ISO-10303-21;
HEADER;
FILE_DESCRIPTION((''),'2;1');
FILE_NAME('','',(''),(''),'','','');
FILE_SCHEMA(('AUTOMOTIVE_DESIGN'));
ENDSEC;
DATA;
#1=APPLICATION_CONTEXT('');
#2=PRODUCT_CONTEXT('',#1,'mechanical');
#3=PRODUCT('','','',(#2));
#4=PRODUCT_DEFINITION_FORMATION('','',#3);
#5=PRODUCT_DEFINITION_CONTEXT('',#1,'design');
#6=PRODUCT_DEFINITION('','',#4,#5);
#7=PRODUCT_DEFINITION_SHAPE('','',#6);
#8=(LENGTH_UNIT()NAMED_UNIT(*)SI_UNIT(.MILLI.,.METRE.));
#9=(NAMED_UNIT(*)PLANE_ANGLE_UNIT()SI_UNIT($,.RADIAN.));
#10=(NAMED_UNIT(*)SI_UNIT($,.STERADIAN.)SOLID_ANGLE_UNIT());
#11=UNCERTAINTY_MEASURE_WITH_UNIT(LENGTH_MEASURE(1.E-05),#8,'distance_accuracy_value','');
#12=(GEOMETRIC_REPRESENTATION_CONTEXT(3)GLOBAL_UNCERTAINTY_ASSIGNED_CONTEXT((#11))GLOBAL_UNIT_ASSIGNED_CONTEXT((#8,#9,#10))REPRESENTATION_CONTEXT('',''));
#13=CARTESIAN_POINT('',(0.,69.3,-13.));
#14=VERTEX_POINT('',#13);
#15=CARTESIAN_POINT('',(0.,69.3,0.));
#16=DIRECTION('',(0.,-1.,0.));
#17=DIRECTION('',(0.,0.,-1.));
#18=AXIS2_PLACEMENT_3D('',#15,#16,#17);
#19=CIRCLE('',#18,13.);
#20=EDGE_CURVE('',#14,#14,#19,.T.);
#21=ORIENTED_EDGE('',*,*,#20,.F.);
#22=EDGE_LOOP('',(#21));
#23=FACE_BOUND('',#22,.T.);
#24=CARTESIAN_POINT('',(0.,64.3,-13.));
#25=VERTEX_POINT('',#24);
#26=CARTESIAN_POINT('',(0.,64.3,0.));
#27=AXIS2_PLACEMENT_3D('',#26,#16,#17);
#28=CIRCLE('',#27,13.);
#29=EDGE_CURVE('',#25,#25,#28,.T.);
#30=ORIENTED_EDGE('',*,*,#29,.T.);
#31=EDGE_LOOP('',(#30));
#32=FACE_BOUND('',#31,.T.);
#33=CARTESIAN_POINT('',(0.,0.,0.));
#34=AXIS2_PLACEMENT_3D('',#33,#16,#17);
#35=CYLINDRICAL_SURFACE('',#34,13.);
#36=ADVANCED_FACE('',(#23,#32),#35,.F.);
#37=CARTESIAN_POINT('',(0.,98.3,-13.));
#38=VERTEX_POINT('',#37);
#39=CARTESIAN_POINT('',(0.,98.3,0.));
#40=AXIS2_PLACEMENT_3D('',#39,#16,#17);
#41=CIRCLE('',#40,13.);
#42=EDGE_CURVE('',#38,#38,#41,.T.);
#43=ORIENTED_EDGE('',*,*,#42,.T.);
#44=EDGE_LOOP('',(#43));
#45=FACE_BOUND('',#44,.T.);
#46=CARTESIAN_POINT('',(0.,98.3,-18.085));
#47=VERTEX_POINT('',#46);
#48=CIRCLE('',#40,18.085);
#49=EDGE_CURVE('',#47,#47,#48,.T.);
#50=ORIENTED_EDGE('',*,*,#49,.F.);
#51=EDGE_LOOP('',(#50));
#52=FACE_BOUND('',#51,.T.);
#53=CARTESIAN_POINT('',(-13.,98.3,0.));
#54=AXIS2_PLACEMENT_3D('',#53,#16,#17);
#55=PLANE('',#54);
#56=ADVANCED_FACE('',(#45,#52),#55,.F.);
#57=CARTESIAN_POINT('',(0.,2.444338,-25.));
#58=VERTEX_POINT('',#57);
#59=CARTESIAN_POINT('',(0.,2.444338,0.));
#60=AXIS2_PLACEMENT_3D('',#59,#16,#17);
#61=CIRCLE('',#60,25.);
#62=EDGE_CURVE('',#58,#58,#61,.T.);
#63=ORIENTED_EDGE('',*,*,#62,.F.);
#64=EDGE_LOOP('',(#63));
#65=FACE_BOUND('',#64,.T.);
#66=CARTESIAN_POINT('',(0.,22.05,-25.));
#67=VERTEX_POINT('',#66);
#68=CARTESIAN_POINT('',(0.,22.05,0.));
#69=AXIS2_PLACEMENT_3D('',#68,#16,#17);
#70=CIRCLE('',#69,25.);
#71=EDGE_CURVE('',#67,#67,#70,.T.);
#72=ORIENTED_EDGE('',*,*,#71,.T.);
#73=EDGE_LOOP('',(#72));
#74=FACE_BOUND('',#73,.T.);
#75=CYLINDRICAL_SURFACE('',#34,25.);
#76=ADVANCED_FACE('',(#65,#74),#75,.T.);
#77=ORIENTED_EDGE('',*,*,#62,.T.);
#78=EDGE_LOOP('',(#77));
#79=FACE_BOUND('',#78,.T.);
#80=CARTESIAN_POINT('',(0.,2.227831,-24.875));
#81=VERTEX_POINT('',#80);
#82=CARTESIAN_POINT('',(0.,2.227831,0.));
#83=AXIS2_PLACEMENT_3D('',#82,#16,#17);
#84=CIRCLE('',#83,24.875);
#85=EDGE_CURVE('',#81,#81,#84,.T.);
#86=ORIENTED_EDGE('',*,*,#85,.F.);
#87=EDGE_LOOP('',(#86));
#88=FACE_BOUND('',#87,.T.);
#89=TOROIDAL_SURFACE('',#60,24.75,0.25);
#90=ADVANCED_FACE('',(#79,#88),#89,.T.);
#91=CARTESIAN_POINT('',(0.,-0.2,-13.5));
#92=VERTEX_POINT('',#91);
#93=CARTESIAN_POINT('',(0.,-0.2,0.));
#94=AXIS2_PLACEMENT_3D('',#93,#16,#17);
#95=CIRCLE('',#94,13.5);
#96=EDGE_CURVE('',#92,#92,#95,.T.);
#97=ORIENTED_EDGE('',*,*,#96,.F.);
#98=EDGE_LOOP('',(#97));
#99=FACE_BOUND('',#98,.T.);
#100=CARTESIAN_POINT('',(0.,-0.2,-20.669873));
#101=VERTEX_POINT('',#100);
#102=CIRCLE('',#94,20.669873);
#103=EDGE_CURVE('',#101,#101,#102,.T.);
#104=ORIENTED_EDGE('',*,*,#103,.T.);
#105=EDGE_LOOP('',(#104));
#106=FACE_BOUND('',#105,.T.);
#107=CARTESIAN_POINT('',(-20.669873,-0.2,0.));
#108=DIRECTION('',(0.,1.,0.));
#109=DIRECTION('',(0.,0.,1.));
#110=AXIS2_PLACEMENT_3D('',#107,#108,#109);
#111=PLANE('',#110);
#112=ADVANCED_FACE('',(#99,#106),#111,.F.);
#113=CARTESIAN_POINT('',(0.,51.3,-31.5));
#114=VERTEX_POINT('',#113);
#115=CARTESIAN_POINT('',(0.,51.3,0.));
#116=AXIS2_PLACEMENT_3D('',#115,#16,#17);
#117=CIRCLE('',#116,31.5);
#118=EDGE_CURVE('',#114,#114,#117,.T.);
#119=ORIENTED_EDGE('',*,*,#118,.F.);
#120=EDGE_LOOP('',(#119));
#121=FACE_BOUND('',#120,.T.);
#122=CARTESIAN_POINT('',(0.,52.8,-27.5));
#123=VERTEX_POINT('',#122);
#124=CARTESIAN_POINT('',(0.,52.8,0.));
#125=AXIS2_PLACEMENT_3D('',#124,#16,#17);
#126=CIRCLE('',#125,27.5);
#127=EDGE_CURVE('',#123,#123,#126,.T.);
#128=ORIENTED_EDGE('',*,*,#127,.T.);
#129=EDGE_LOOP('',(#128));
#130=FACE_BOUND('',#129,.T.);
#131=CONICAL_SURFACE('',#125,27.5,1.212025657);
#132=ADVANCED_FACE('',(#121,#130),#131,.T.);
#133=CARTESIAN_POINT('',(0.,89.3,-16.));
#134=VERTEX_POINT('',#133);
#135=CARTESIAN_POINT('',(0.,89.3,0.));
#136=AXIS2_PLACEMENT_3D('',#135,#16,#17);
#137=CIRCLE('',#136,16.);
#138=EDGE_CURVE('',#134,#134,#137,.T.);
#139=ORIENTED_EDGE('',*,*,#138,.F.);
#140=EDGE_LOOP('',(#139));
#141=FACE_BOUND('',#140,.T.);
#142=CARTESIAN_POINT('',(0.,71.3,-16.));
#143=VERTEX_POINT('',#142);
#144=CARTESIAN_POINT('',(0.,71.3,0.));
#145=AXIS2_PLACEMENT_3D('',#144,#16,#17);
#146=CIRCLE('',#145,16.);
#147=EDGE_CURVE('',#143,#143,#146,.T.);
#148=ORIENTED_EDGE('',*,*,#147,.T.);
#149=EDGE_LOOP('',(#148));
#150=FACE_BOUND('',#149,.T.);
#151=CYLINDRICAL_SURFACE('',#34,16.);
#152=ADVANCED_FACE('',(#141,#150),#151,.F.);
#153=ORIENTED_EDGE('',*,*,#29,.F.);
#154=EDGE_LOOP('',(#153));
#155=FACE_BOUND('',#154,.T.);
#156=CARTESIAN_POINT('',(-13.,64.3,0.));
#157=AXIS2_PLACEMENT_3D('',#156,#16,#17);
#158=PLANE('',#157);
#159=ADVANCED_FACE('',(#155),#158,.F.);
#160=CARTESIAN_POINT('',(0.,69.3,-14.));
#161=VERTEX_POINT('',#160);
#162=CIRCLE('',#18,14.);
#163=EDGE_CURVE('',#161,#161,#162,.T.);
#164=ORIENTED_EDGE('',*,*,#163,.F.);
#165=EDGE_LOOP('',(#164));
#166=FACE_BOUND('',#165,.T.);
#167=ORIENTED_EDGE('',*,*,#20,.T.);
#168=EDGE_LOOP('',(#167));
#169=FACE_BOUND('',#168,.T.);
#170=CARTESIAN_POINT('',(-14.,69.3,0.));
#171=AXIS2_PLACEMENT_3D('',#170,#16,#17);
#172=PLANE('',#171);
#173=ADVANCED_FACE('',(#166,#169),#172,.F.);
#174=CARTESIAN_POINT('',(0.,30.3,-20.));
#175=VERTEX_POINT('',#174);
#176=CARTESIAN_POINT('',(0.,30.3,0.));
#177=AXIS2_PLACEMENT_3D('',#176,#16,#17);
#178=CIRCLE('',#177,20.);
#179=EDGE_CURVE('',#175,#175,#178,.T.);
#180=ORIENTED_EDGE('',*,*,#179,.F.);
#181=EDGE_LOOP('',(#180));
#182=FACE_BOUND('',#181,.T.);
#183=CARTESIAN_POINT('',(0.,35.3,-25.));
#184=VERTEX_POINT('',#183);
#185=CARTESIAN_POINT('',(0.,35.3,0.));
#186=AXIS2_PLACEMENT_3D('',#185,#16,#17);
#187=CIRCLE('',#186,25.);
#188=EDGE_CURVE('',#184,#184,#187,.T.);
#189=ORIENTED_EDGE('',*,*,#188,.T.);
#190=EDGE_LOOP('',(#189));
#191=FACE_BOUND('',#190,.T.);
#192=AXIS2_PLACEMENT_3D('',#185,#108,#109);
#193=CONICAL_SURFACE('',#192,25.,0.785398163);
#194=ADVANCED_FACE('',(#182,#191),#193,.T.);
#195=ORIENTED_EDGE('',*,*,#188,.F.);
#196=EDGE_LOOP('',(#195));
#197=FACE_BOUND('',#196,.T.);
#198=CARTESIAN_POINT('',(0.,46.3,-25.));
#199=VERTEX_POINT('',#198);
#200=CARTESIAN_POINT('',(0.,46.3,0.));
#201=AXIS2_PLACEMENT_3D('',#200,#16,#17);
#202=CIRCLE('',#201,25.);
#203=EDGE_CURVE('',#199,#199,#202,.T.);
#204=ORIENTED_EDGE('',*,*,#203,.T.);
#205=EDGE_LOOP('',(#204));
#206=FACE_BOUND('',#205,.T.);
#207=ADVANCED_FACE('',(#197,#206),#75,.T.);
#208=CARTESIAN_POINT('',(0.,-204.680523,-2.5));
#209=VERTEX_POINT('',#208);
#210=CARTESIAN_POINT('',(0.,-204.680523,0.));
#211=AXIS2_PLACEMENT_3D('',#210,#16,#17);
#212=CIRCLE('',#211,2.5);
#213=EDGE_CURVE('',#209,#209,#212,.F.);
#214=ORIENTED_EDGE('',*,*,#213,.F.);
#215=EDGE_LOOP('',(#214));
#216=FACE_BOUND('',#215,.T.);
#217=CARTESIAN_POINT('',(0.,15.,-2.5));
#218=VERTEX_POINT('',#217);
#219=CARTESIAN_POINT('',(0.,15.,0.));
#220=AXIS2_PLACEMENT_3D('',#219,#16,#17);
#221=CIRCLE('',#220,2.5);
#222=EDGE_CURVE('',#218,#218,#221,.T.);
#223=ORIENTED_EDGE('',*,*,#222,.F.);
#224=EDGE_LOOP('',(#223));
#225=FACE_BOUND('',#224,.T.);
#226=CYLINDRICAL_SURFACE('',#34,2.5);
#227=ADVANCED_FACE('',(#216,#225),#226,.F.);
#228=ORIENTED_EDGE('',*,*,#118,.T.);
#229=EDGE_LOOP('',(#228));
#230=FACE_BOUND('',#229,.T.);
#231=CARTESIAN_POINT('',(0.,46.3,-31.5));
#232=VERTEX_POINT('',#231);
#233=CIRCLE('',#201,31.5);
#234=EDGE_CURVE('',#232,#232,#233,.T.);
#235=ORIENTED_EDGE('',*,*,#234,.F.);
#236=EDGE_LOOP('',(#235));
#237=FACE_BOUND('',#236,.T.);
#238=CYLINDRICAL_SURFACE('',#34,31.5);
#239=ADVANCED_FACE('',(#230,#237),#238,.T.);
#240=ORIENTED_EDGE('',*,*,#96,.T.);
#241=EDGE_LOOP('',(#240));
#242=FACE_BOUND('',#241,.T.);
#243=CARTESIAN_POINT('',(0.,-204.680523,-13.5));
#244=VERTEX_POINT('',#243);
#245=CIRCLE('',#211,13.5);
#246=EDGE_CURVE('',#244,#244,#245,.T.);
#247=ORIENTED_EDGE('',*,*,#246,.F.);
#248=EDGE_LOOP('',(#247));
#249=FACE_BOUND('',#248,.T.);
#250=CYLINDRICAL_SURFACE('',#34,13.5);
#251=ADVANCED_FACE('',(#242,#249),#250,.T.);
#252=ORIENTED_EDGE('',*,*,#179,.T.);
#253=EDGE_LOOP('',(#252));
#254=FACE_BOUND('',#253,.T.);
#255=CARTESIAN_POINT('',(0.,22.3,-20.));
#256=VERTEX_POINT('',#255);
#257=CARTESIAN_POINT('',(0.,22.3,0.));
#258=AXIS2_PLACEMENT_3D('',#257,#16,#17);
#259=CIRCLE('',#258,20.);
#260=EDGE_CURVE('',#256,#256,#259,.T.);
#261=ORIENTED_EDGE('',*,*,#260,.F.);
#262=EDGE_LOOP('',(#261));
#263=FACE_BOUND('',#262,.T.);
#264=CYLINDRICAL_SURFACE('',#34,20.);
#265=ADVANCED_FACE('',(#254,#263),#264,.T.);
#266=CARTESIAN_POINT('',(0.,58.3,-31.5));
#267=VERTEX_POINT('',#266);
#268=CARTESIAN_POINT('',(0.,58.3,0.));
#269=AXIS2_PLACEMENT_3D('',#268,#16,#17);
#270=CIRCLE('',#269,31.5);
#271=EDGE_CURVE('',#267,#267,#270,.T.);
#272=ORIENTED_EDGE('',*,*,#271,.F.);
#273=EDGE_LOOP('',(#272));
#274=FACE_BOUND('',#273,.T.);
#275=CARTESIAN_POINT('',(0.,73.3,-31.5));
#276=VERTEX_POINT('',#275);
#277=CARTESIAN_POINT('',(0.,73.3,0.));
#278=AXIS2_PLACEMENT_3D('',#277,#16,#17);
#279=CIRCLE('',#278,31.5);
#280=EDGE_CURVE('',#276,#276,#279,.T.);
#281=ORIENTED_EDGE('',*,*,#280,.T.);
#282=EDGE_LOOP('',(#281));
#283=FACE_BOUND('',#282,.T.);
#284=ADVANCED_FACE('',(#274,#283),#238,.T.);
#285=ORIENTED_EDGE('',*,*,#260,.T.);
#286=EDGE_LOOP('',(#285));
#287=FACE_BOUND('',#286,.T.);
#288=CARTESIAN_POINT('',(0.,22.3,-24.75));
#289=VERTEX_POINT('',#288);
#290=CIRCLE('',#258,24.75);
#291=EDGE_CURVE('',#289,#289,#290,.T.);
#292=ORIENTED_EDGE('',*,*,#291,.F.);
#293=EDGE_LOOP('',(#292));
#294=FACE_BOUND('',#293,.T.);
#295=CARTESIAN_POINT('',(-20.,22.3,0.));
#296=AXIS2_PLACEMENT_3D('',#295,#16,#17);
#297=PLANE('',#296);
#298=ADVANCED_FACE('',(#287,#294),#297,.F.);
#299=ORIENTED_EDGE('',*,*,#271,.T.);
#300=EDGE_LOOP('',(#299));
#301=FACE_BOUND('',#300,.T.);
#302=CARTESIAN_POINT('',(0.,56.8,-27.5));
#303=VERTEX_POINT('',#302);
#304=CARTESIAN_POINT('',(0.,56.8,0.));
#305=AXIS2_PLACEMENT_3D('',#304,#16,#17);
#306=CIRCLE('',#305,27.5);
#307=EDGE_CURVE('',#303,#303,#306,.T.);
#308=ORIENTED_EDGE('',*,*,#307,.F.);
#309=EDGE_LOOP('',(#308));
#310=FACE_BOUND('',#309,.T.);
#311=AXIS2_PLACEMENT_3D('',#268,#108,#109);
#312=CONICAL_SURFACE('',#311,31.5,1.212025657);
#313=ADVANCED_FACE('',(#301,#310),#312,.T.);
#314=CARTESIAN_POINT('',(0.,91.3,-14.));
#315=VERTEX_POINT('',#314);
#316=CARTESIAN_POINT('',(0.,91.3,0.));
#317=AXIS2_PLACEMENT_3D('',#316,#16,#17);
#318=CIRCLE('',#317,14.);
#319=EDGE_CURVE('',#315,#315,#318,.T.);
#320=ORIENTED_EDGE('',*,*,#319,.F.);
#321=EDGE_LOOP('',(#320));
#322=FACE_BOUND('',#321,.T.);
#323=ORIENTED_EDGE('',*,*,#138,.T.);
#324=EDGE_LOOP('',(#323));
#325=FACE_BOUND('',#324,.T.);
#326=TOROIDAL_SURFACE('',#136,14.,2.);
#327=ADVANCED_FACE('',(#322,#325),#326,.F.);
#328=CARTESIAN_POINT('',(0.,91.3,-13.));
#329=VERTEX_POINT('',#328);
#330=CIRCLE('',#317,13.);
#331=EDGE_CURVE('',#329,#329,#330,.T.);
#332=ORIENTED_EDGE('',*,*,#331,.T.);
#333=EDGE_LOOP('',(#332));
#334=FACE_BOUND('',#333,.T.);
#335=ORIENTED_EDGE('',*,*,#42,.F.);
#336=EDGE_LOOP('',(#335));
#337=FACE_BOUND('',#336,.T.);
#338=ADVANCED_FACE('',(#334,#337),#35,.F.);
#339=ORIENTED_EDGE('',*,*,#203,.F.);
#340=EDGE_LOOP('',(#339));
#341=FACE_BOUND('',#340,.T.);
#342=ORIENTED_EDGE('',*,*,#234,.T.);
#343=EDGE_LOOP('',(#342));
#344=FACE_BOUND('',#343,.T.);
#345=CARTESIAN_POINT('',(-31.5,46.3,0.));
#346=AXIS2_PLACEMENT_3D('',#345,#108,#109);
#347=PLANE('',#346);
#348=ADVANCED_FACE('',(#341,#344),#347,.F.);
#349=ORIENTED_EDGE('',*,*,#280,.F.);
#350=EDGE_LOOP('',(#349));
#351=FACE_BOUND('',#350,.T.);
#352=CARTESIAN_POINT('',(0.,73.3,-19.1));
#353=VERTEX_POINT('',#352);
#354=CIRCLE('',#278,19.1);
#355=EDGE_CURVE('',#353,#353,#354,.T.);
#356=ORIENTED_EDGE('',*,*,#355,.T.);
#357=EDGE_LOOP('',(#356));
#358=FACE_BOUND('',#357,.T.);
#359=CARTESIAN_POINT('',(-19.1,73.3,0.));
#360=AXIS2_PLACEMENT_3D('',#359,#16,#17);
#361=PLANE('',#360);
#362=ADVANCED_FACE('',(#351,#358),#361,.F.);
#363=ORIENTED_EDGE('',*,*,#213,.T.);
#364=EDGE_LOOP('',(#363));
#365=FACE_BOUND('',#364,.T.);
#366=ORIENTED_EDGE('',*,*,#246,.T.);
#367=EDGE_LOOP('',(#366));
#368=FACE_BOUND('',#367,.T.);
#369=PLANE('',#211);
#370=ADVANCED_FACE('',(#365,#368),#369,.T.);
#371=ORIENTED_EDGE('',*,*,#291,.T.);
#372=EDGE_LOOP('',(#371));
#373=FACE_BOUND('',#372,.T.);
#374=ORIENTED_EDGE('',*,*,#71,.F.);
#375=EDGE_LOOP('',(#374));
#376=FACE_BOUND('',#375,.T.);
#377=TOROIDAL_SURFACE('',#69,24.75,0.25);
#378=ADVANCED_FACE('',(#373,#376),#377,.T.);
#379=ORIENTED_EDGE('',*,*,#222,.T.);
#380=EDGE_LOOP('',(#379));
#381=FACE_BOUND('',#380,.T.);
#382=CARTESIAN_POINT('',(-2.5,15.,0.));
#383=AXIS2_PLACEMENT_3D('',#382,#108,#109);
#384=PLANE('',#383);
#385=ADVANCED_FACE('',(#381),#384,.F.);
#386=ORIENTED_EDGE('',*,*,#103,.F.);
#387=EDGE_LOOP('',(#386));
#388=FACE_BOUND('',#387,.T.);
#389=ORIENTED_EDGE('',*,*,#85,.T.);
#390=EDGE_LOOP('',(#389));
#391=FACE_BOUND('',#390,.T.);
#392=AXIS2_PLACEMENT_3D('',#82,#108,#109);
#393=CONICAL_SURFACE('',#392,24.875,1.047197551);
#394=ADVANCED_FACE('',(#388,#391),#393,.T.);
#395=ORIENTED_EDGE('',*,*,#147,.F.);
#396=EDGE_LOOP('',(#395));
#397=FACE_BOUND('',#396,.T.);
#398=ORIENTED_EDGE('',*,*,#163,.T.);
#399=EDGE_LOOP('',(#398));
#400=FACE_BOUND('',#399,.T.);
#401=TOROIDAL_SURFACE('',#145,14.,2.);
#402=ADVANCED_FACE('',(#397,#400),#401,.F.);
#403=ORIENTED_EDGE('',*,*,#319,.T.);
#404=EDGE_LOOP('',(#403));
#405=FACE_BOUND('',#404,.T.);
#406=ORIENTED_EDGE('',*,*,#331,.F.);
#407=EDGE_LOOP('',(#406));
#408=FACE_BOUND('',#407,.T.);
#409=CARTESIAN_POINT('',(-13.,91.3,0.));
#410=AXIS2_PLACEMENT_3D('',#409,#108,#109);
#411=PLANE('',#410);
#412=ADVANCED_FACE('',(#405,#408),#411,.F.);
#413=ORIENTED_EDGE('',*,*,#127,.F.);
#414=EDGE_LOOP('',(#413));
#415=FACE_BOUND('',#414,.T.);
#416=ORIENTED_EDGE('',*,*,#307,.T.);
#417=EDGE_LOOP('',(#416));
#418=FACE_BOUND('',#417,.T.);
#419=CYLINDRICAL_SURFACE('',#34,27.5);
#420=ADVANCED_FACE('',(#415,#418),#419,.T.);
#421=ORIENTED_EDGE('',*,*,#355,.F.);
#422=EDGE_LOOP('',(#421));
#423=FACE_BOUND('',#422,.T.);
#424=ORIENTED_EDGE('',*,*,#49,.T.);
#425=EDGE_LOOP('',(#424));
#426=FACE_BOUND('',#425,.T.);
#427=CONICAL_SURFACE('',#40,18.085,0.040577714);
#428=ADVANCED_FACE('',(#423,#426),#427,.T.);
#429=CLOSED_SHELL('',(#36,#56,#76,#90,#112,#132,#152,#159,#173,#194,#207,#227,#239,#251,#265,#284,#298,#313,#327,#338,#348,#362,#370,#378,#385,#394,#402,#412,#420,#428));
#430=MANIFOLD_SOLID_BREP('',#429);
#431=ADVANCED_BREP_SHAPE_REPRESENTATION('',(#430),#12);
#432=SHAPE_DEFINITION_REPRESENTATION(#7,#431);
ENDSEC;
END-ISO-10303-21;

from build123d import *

# Parameters (mm, degrees)
SWEEP1_START       = -204.68052275
SWEEP1_OUTLINE_R   = 13.5
SWEEP1_OUTLINE_R_2 = 2.5
SWEEP1_DEPTH       = 204.68052275


# Read off the part's stored shape, not the designer's step: Sweep1
with BuildPart() as part:
    # Sketch1 → Revolve1 (revolve)
    with BuildSketch(Plane.XY, mode=Mode.PRIVATE) as revolve1_sk:
        with BuildLine():
            Line((-13, 98.3), (-18.085, 98.3))
            Line((-18.085, 98.3), (-19.1, 73.3))
            Line((-19.1, 73.3), (-31.5, 73.3))
            Line((-31.5, 73.3), (-31.5, 58.3))
            Line((-31.5, 58.3), (-27.5, 56.8))
            Line((-27.5, 56.8), (-27.5, 52.8))
            Line((-27.5, 52.8), (-31.5, 51.3))
            Line((-31.5, 51.3), (-31.5, 46.3))
            Line((-31.5, 46.3), (-25, 46.3))
            Line((-25, 46.3), (-25, 35.3))
            Line((-25, 35.3), (-20, 30.3))
            Line((-20, 30.3), (-20, 22.3))
            Line((-20, 22.3), (-24.75, 22.3))
            ThreePointArc((-24.75, 22.3), (-24.926776695, 22.226776695), (-25, 22.05))
            Line((-25, 22.05), (-25, 2.444337567))
            ThreePointArc((-25, 2.444337567), (-24.966506351, 2.319337567), (-24.875, 2.227831216))
            Line((-24.875, 2.227831216), (-20.669872981, -0.2))
            Line((-20.669872981, -0.2), (-13.5, -0.2))
            Line((-13.5, -0.2), (-13.5, 0))
            Line((-13.5, 0), (-2.5, 0))
            Line((-2.5, 0), (-2.5, 15))
            Line((-2.5, 15), (0, 15))
            Line((0, 15), (0, 64.3))
            Line((0, 64.3), (-13, 64.3))
            Line((-13, 64.3), (-13, 69.3))
            Line((-13, 69.3), (-14, 69.3))
            ThreePointArc((-14, 69.3), (-15.414213562, 69.885786438), (-16, 71.3))
            Line((-16, 71.3), (-16, 89.3))
            ThreePointArc((-16, 89.3), (-15.414213562, 90.714213562), (-14, 91.3))
            Line((-14, 91.3), (-13, 91.3))
            Line((-13, 91.3), (-13, 98.3))
        make_face()
    revolve(revolve1_sk.sketch.rotate(Axis((0, 0, 0), (0, 1, 0)), 270), axis=Axis((0, 0, 0), (0, 1, 0)))

    # Sweep1 outline → Sweep1 (add)
    with BuildSketch(Plane(origin=(0, 0, 0), x_dir=(1, 0, 0), z_dir=(0, 1, 0)).offset(SWEEP1_START)):
        Circle(SWEEP1_OUTLINE_R)
        Circle(SWEEP1_OUTLINE_R_2, mode=Mode.SUBTRACT)
    extrude(amount=SWEEP1_DEPTH)


solid = part.part
